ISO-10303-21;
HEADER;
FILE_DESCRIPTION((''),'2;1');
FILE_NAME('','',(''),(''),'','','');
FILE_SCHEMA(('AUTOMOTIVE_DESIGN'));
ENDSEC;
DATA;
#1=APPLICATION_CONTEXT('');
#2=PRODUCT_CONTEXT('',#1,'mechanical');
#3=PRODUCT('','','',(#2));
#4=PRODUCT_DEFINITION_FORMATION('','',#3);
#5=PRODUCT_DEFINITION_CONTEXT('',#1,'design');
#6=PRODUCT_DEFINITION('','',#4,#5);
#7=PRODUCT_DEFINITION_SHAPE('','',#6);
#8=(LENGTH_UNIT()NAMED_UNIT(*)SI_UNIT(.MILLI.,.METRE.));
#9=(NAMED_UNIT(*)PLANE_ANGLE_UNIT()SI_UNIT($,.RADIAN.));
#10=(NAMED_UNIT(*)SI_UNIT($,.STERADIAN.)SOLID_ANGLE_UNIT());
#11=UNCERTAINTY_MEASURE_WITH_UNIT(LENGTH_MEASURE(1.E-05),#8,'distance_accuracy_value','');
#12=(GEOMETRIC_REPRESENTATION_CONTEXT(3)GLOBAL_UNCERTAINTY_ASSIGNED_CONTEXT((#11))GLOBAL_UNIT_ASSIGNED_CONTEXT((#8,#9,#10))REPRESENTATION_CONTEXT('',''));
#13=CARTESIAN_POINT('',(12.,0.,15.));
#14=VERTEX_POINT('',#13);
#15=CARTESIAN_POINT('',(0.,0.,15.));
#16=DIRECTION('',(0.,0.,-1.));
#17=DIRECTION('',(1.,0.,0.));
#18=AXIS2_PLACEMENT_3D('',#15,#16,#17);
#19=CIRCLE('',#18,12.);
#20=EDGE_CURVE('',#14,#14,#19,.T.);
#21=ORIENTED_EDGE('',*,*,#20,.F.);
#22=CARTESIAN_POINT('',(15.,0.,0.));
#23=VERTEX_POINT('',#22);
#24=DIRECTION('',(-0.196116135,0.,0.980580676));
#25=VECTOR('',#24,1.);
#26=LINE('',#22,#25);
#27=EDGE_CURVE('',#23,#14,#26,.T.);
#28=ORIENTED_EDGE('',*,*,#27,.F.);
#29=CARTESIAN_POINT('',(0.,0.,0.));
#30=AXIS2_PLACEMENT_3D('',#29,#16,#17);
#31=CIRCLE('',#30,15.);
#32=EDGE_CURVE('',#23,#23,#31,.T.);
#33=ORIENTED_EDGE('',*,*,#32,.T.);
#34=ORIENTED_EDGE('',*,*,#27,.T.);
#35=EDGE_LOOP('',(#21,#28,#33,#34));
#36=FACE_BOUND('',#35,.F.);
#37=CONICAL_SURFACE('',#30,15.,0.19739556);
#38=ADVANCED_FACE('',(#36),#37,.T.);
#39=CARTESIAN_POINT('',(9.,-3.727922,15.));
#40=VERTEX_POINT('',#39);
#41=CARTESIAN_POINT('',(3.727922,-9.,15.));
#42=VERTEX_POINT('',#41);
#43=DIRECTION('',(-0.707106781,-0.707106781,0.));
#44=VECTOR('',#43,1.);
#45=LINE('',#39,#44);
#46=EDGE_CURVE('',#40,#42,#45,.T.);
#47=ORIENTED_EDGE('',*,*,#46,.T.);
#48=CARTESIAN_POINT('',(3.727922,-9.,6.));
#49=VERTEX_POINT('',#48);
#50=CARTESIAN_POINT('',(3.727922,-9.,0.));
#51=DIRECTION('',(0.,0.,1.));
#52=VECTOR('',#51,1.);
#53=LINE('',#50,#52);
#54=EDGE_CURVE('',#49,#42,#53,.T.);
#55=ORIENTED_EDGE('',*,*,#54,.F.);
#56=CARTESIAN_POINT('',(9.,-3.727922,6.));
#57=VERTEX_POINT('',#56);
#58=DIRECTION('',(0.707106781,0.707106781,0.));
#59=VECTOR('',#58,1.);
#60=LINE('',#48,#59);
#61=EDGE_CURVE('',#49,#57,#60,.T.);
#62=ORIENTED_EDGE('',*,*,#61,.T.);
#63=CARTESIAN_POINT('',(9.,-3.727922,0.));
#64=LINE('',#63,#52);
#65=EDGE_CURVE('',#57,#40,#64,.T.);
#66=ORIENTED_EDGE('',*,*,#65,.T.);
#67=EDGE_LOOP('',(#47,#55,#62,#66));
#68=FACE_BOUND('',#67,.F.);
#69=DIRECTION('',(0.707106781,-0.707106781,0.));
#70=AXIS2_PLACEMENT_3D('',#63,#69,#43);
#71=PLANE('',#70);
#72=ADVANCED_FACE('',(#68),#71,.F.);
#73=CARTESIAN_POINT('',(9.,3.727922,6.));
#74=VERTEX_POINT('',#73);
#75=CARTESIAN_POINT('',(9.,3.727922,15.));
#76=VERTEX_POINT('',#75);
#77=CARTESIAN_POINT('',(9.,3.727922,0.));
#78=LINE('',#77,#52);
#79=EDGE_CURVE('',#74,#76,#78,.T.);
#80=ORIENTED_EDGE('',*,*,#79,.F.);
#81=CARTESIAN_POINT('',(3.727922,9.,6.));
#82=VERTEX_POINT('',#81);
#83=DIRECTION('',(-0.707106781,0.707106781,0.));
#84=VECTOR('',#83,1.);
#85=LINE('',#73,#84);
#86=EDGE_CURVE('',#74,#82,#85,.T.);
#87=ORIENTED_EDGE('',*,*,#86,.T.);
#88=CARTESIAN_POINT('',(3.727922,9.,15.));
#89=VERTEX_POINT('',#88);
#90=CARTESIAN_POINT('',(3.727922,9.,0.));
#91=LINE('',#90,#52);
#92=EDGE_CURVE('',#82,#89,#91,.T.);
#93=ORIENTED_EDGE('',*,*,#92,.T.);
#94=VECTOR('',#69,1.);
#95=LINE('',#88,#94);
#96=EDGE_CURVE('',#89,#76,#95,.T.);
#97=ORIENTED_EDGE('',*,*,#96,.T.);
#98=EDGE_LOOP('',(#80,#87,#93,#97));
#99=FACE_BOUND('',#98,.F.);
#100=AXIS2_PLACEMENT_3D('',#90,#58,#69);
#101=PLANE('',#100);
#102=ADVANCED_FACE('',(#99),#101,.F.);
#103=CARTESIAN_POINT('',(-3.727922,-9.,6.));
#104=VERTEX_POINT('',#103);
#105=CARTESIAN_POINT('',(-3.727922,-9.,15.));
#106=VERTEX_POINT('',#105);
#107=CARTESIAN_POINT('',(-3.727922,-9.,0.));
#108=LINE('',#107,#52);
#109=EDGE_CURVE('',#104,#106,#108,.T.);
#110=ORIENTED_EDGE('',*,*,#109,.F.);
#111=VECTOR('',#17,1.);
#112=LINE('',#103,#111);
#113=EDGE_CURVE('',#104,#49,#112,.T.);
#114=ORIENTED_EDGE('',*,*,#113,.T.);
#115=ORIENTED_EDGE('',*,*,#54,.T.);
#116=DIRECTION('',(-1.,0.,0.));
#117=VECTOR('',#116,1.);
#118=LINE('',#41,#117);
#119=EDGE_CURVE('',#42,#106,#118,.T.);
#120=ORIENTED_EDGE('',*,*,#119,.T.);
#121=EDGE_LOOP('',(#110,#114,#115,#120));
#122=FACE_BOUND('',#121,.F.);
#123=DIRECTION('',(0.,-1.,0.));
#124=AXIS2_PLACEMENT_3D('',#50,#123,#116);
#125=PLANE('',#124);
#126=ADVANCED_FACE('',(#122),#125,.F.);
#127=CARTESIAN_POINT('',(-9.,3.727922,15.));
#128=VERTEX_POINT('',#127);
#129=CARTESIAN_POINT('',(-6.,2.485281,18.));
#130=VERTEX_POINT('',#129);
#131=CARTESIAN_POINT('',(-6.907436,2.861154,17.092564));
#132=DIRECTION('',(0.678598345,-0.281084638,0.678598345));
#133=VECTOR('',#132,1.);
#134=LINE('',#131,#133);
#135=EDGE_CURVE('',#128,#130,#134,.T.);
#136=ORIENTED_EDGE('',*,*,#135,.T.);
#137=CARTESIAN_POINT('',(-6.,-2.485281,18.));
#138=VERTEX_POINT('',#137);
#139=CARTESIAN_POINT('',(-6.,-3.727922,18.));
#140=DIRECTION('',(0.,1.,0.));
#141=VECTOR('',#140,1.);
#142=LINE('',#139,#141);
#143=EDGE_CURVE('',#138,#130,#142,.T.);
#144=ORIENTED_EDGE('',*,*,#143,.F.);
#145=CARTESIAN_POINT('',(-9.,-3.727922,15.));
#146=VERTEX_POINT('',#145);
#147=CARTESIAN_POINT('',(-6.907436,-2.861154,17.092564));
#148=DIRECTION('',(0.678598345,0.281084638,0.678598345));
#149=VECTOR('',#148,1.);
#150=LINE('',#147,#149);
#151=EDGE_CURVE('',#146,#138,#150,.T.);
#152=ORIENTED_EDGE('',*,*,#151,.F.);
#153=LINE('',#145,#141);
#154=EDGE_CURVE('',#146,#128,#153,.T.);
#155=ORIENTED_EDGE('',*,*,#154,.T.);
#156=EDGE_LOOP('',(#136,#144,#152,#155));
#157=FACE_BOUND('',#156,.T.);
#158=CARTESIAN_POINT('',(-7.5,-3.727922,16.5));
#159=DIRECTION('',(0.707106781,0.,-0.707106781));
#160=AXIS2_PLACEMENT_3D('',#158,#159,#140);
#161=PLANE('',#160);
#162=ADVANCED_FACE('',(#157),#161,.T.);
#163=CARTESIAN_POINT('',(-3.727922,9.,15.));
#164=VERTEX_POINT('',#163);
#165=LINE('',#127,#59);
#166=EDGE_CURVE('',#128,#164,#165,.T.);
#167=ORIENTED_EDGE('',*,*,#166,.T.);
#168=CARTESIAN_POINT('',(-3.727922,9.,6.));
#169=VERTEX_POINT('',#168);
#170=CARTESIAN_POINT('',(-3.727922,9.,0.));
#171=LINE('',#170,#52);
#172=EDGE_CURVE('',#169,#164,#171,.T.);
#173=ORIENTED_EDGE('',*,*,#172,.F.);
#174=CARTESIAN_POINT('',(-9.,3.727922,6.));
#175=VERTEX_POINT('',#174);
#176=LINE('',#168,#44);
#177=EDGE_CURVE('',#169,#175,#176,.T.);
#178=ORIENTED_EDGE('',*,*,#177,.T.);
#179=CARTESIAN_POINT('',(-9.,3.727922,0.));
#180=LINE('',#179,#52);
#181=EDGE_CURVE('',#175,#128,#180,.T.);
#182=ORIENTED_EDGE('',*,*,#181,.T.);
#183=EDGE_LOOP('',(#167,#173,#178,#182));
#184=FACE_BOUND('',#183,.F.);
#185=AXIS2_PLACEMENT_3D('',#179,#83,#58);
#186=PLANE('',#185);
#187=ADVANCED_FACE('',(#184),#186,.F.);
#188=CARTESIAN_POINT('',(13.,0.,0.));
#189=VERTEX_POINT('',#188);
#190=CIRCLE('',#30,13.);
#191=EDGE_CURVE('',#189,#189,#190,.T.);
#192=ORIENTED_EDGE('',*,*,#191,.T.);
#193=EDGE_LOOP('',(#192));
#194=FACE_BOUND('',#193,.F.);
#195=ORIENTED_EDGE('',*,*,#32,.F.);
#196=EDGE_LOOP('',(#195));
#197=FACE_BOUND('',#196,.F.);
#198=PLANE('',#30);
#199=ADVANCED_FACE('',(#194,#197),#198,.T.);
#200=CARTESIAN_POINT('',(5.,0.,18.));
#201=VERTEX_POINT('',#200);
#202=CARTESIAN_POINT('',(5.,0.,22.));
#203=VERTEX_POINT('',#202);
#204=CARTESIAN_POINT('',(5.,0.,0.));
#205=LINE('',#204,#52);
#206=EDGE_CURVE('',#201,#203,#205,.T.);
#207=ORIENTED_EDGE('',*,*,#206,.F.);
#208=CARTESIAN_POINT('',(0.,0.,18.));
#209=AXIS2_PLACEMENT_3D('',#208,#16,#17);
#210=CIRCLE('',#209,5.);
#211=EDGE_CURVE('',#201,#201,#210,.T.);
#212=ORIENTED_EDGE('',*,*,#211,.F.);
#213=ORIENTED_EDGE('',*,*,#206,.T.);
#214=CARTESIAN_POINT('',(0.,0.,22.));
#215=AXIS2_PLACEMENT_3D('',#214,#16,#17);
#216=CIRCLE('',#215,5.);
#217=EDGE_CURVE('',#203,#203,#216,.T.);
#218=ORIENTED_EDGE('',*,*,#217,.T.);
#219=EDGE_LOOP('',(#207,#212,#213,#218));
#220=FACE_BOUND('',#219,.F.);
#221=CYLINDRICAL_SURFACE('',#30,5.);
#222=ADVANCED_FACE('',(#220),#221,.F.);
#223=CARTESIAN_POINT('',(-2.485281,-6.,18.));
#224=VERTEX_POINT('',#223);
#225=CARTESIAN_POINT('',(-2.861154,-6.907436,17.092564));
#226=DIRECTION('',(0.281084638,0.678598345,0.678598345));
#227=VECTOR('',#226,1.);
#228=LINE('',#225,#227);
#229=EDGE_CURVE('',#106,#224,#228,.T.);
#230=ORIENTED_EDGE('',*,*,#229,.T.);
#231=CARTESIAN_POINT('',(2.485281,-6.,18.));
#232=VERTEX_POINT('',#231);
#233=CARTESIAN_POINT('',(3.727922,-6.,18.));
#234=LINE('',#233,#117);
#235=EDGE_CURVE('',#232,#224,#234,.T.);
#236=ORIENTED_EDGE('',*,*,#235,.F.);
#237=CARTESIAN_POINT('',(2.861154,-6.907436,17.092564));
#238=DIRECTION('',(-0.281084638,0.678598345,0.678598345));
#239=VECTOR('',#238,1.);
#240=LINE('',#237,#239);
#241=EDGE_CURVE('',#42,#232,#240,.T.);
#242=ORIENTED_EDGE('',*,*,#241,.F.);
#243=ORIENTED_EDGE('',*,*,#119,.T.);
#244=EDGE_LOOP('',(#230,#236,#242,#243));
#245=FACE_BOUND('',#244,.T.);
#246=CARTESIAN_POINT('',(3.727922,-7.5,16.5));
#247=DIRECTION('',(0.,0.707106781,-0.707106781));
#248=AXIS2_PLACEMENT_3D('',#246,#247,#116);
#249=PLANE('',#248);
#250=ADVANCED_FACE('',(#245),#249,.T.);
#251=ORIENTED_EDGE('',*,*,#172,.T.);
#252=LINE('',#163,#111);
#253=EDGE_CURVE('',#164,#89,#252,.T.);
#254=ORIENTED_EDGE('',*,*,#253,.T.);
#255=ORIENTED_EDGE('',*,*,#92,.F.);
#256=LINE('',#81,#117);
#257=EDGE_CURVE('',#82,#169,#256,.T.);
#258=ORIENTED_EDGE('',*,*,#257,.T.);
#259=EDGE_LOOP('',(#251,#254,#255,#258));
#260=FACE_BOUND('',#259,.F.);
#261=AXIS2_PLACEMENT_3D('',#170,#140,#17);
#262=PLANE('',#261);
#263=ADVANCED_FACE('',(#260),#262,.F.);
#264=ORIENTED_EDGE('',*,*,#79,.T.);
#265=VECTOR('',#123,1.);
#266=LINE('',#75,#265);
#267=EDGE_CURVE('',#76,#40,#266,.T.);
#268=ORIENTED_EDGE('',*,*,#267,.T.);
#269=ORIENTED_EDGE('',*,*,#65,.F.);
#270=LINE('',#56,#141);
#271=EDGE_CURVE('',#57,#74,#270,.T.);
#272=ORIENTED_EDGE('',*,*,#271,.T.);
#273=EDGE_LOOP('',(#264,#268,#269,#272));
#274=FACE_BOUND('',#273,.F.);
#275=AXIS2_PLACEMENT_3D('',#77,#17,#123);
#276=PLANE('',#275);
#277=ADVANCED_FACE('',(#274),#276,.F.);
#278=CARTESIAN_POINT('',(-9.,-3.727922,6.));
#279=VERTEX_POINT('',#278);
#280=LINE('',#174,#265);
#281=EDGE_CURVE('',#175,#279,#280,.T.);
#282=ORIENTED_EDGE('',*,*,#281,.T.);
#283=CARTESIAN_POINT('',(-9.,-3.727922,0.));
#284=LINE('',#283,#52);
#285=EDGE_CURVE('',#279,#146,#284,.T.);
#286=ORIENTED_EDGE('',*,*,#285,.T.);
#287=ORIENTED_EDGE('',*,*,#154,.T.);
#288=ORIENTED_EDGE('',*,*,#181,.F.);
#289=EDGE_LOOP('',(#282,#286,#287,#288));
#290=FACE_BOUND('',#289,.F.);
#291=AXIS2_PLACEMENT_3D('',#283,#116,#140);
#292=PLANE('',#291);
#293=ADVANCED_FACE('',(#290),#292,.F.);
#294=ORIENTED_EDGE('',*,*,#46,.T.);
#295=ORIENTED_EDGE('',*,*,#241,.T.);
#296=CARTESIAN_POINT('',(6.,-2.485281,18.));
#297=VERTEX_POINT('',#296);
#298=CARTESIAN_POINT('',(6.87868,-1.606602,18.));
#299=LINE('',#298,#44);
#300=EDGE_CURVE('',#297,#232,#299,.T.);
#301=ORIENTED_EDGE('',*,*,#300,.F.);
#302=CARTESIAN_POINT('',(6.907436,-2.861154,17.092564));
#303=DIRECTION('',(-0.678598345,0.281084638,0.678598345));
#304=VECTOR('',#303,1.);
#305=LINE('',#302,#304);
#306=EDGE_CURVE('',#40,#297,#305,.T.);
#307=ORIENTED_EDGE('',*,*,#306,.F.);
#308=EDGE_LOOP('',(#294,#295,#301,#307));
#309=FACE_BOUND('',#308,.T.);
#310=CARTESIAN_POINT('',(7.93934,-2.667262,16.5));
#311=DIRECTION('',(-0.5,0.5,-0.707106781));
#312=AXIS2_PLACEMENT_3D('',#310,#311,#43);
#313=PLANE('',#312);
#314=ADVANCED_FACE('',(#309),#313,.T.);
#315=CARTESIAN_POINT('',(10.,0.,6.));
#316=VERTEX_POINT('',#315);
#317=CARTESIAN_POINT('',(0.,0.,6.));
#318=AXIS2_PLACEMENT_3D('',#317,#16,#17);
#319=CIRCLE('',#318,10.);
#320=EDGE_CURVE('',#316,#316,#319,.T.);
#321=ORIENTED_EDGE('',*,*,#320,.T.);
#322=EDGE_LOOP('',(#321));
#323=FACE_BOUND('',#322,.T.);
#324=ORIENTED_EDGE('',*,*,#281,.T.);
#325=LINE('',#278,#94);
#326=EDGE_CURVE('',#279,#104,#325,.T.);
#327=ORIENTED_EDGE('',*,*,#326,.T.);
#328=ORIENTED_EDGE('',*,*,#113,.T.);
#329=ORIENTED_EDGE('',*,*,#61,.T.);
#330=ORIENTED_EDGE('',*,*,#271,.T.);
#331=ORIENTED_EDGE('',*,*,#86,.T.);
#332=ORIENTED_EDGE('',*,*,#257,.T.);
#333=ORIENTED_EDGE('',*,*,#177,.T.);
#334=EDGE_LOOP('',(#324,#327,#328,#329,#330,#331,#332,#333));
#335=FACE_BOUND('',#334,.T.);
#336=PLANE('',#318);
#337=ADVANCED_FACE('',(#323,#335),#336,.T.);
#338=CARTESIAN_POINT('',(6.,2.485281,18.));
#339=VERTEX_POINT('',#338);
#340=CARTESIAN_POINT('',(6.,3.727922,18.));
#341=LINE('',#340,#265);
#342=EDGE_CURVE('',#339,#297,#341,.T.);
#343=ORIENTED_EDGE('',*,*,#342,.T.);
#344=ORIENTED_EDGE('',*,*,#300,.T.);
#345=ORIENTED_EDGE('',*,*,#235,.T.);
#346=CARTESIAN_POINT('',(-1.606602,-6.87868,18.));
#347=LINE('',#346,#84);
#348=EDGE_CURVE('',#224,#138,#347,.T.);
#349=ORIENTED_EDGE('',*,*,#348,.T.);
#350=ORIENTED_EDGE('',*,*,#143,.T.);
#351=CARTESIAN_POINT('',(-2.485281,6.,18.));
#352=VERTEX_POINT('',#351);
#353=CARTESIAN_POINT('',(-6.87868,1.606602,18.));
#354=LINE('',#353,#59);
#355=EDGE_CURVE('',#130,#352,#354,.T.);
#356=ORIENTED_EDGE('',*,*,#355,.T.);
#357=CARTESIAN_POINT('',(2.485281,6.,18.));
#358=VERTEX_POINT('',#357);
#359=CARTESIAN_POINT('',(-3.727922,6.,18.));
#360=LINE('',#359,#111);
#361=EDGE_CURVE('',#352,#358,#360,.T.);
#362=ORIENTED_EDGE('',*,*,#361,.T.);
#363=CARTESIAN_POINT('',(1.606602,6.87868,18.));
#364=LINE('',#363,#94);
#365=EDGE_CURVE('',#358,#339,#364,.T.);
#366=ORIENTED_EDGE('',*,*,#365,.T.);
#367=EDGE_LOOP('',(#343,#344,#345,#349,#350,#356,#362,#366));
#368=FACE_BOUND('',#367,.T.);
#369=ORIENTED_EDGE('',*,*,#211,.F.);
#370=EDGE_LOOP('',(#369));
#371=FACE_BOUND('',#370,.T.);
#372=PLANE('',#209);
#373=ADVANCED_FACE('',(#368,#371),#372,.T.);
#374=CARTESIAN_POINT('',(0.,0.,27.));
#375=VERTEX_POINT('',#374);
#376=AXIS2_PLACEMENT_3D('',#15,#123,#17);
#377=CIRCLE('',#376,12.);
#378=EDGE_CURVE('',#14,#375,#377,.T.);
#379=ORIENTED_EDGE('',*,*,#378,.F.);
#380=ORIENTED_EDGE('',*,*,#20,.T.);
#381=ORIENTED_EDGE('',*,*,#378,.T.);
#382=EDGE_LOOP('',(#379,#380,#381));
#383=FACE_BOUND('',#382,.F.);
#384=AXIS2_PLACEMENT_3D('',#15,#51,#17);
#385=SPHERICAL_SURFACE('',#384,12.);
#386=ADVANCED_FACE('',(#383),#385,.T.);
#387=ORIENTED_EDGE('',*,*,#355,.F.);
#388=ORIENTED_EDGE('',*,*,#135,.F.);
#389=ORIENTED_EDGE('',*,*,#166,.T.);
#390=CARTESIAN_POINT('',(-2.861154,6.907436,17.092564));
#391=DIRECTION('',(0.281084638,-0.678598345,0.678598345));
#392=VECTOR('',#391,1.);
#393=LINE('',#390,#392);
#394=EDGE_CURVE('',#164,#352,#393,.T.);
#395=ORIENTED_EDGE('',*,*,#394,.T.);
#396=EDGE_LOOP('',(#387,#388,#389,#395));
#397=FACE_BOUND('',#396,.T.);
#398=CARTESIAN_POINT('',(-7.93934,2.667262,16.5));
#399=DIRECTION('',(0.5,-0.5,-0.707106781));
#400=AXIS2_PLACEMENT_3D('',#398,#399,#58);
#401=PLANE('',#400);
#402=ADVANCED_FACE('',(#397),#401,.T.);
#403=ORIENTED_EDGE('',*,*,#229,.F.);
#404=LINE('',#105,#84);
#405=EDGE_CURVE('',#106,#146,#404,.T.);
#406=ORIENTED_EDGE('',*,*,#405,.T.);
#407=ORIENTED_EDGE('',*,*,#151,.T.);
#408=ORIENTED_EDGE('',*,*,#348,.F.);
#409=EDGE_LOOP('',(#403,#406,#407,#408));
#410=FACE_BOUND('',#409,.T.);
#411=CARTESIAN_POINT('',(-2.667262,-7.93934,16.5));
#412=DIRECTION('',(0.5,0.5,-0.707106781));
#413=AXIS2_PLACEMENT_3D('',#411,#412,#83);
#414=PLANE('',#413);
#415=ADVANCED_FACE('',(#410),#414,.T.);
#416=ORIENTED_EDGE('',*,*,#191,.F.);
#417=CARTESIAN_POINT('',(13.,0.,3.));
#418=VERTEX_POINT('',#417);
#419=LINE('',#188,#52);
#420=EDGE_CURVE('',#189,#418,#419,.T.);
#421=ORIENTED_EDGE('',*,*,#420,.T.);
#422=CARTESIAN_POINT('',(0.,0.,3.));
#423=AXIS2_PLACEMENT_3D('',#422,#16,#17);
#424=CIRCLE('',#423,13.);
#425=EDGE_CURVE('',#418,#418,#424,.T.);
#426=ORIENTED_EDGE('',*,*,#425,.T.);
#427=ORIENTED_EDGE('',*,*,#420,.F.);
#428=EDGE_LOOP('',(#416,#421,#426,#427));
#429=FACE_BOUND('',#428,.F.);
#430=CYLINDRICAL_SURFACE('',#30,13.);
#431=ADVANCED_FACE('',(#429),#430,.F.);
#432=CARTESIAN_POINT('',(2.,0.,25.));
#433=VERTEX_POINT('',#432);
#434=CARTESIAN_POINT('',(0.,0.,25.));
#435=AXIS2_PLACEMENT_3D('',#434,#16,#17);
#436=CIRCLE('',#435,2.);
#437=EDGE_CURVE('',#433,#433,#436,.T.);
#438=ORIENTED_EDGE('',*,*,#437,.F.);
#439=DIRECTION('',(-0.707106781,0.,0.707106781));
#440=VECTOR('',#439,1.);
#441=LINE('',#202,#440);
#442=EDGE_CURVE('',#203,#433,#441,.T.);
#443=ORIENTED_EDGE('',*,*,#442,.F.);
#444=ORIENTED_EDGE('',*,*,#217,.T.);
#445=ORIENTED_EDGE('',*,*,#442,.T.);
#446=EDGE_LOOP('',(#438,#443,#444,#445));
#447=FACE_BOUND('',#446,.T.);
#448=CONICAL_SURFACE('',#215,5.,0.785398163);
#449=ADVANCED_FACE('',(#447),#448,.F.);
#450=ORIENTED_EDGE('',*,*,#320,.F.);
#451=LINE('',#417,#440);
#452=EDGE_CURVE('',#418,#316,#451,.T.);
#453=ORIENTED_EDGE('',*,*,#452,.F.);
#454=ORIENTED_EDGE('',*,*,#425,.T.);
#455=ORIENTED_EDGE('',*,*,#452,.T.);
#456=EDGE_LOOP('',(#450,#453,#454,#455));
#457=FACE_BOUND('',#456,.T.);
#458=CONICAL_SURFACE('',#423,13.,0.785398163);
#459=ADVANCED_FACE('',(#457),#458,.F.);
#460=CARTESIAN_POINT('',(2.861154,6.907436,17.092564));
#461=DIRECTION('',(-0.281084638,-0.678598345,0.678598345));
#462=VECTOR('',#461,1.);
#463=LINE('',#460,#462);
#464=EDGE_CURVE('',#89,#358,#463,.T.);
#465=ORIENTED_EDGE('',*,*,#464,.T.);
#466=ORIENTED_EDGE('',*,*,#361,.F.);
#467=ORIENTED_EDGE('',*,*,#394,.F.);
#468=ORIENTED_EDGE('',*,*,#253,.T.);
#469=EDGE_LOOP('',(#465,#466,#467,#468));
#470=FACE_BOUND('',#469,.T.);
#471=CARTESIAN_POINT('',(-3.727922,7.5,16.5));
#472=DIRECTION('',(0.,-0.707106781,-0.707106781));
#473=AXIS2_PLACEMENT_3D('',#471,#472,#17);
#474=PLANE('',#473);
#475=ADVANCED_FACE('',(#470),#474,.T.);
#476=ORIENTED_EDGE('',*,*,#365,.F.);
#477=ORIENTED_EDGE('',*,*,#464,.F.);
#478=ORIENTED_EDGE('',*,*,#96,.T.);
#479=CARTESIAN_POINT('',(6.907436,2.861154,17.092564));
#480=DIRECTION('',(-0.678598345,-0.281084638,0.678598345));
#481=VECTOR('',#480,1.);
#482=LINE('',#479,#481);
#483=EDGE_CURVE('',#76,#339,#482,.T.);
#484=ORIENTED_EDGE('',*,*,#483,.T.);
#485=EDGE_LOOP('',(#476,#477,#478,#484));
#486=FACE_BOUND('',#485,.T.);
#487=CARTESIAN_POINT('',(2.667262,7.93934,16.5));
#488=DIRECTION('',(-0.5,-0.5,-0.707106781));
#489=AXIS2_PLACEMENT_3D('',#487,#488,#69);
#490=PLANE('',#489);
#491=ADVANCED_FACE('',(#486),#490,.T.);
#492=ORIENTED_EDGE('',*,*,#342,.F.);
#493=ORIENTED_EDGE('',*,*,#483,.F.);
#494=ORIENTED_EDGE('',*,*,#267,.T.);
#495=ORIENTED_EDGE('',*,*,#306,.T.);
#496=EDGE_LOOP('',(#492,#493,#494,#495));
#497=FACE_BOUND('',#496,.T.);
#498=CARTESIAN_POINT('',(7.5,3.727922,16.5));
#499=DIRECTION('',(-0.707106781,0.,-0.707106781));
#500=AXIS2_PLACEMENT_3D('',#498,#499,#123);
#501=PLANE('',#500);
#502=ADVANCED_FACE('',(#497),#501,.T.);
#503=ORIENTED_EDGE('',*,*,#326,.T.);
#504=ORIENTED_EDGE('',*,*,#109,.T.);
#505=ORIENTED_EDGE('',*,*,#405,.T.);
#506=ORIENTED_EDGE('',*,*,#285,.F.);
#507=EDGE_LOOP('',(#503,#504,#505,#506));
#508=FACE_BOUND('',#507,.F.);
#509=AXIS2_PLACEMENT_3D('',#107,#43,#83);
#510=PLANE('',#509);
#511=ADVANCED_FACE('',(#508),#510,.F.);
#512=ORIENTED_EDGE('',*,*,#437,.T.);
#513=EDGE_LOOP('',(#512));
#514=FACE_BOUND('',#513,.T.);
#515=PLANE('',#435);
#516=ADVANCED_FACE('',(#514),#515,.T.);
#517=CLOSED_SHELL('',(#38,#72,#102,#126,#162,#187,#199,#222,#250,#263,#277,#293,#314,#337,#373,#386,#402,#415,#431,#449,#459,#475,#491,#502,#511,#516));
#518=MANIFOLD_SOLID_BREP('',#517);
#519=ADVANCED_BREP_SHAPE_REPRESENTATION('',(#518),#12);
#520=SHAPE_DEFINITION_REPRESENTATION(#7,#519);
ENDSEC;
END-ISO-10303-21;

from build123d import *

# Parameters (mm, degrees)
F2_R     = 5
F2_R_2   = 4.7874181829
F3_DEPTH = 25
F4_DEPTH = 18
F2_R_3   = 13
F5_DEPTH = 6
F6_SIZE  = 3


# Not quite as in the source:
# - a feature names something its author has since deleted; it is built from what else it names


with BuildPart() as f1:
    # F0 (on Front) → F1 (revolve)
    with BuildSketch(Plane.XZ):
        with BuildLine():
            Line((0, 27), (0, 0))
            Line((0, 0), (15, 0))
            Line((15, 0), (12, 15))
            ThreePointArc((12, 15), (8.4852813742, 23.4852813742), (0, 27))
        make_face()
    revolve(axis=Axis((0, 0, 13.5), (0, 0, -1)))

    # F2 (on face) → F3 (cut)
    with BuildSketch(Plane(origin=(0, 0, 0), x_dir=(1, 0, 0), z_dir=(0, 0, -1))):
        Circle(F2_R)
        Circle(F2_R_2, mode=Mode.SUBTRACT)
        Circle(F2_R_2)
    extrude(amount=-F3_DEPTH, mode=Mode.SUBTRACT)

    # F2 (on face) → F4 (cut)
    with BuildSketch(Plane(origin=(0, 0, 0), x_dir=(1, 0, 0), z_dir=(0, 0, -1))):
        Polygon((9, -3.7279220614), (9, 3.7279220614), (3.7279220614, 9), (-3.7279220614, 9), (-9, 3.7279220614), (-9, -3.7279220614), (-3.7279220614, -9), (3.7279220614, -9), align=None)
        Circle(F2_R, mode=Mode.SUBTRACT)
    extrude(amount=-F4_DEPTH, mode=Mode.SUBTRACT)

    # F2 (on face) → F5 (cut)
    with BuildSketch(Plane(origin=(0, 0, 0), x_dir=(1, 0, 0), z_dir=(0, 0, -1))):
        Circle(F2_R_3)
        Polygon((3.7279220614, 9), (9, 3.7279220614), (9, -3.7279220614), (3.7279220614, -9), (-3.7279220614, -9), (-9, -3.7279220614), (-9, 3.7279220614), (-3.7279220614, 9), align=None, mode=Mode.SUBTRACT)
    extrude(amount=-F5_DEPTH, mode=Mode.SUBTRACT)

    # F6
    f6_edges = [f1.edges().sort_by_distance(p)[0] for p in [
        (-5, 0, 25),
        (-13, 0, 6),
        (0, 9, 18),
        (6.363961, 6.363961, 18),
        (9, 0, 18),
        (-6.363961, 6.363961, 18),
        (-9, 0, 18),
        (-6.363961, -6.363961, 18),
        (0, -9, 18),
        (6.363961, -6.363961, 18),
    ]]
    chamfer(f6_edges, length=F6_SIZE)


solid = f1.part
